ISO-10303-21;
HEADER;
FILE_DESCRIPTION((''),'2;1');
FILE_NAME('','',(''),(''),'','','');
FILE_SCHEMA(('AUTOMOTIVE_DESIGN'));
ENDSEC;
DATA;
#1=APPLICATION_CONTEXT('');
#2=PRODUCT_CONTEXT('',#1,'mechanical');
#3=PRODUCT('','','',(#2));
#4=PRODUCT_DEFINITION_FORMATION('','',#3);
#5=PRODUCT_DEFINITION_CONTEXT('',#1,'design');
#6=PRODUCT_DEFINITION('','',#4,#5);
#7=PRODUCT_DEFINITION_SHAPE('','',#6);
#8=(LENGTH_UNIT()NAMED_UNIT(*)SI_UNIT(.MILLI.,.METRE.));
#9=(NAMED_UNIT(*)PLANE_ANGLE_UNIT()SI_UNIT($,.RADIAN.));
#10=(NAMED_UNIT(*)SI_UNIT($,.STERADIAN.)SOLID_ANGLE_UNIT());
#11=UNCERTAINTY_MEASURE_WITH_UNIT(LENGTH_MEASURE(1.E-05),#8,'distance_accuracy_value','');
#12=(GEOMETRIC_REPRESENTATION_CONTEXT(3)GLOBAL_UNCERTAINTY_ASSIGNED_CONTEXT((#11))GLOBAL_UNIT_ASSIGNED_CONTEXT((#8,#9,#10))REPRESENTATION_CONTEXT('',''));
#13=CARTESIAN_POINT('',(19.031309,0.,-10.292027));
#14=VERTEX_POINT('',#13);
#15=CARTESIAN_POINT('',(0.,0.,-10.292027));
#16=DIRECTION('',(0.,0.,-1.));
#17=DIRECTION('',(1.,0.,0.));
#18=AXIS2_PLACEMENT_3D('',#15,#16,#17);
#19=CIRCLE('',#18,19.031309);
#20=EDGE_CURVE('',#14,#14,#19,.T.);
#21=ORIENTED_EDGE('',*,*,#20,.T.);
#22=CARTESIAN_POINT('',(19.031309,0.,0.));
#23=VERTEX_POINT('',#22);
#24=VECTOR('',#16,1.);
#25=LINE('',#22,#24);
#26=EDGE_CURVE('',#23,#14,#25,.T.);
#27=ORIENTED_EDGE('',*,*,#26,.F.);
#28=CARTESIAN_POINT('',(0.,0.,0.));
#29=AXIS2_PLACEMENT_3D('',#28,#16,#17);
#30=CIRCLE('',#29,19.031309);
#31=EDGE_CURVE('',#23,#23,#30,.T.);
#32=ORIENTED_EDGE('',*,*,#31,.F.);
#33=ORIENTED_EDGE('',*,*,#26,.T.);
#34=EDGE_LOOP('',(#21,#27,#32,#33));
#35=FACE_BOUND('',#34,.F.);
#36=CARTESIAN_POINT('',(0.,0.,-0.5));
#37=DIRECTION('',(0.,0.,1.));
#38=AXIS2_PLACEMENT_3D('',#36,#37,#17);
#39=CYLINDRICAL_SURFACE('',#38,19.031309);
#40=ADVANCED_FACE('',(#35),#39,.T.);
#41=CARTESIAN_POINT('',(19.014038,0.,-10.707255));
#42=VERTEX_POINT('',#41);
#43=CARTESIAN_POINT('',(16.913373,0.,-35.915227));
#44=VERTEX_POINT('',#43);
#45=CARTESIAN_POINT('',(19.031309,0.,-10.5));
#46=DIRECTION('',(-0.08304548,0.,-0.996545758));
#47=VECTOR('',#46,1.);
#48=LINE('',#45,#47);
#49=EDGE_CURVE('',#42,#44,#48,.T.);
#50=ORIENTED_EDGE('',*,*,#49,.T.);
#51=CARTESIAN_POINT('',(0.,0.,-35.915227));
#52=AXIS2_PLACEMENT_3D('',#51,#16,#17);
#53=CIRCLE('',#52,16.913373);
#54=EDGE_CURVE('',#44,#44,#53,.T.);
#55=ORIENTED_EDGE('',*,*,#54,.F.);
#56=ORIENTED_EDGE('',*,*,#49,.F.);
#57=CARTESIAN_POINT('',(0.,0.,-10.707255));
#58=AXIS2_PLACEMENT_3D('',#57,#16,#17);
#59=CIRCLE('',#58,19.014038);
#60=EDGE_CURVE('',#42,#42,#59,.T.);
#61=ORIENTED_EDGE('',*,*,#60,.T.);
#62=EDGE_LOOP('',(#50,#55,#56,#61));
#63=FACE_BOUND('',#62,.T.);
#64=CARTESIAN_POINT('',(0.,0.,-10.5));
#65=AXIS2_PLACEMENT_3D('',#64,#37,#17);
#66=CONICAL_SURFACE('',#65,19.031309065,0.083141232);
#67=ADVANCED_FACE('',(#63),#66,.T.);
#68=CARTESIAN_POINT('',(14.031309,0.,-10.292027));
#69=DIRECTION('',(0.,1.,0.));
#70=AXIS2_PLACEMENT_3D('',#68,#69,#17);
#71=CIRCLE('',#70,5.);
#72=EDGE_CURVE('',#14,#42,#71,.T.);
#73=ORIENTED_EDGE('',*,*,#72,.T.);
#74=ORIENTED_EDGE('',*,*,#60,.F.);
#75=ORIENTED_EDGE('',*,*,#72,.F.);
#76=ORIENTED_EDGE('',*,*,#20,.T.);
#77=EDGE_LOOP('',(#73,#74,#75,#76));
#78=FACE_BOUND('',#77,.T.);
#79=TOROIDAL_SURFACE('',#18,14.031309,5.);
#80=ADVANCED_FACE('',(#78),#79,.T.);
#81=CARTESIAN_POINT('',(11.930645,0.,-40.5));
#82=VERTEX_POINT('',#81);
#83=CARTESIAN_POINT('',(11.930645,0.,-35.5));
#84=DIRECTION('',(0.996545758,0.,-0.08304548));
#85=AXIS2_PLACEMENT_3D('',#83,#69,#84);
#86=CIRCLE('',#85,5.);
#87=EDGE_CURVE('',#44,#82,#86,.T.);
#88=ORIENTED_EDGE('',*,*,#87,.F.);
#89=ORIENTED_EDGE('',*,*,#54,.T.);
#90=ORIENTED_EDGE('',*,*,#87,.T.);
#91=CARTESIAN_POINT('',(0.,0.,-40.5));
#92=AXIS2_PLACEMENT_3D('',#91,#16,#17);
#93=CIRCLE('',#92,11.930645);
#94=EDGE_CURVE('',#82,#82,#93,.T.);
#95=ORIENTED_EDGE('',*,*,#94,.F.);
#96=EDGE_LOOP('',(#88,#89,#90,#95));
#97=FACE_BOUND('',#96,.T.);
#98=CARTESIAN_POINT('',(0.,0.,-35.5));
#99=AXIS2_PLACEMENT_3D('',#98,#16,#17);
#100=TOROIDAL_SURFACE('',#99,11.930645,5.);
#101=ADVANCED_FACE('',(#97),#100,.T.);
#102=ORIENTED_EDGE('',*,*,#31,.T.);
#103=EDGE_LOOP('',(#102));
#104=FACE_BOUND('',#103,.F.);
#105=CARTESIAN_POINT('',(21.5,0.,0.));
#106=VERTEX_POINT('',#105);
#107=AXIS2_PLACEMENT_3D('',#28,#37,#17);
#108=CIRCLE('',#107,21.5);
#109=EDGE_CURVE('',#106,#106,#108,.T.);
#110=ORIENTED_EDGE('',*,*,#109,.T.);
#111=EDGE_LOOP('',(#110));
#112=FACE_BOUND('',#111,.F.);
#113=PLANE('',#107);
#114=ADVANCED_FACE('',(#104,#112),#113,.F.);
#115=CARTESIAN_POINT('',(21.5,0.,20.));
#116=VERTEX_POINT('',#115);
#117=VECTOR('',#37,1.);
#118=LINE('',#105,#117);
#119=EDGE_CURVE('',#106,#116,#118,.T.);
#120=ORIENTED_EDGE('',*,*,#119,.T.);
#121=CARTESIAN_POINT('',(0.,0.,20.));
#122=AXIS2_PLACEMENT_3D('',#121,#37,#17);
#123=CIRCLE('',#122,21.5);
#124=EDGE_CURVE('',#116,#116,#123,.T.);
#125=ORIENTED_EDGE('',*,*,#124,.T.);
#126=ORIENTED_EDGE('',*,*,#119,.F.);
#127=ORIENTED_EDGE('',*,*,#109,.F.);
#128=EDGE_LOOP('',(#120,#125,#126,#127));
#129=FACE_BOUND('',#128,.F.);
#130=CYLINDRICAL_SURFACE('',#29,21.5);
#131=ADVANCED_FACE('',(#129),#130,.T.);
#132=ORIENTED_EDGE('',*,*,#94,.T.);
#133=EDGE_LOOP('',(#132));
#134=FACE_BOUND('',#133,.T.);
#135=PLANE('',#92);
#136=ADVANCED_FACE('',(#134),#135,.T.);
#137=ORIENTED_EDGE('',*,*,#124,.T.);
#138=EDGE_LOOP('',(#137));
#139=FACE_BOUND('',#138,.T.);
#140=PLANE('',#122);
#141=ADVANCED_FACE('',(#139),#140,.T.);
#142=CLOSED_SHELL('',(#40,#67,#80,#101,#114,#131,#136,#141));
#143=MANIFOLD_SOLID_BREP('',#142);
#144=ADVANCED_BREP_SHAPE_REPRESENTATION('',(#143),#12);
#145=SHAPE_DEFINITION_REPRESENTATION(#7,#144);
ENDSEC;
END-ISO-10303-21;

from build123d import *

# Parameters (mm, degrees)
F0_R     = 21.5
F1_DEPTH = 20
F2_R     = 19.0313090647
F3_DEPTH = 0.5
F4_R     = 19.0313090647
F5_DEPTH = 40


# Not quite as in the source:
# - a fillet or chamfer that OpenCascade refuses, or shapes differently, is made with other operations: its cross-section is extruded or revolved along the edge and cut away or added


with BuildPart() as f1:
    # F0 (on Top) → F1 (new body)
    with BuildSketch(Plane.XY):
        Circle(F0_R)
    extrude(amount=F1_DEPTH)

    # F2 (on face) → F3 (join)
    with BuildSketch(Plane(origin=(0, 0, 0), x_dir=(1, 0, 0), z_dir=(0, 0, -1))):
        Circle(F2_R)
    extrude(amount=F3_DEPTH)

    # F4 (on face) → F5 (join)
    with BuildSketch(Plane(origin=(0, 0, -0.5), x_dir=(1, 0, 0), z_dir=(0, 0, -1))):
        Circle(F4_R)
    extrude(amount=F5_DEPTH)

    # F6: chamfer of 2.5 x 30 on 1 edges, made by hand

    # F6_s1 → F6_t2 (revolve, cut)
    with BuildSketch(Plane.XZ):
        Polygon((19.0313090647, -10.5), (16.5313090647, -40.5), (19.0313090647, -40.5), align=None)
    revolve(axis=Axis((0, 0, -40.5), (0, 0, -1)), mode=Mode.SUBTRACT)

    # F7: fillet of radius 5 on 2 edges, made by hand

    # F7_s1 → F7_t2 (revolve, cut)
    with BuildSketch(Plane.XZ):
        with BuildLine():
            ThreePointArc((16.9133734481, -35.9152273993), (15.3161921018, -39.1794114337), (11.9306446569, -40.5))
            Line((11.9306446569, -40.5), (16.5313090647, -40.5))
            Line((16.5313090647, -40.5), (16.9133734481, -35.9152273993))
        make_face()
    revolve(axis=Axis((0, 0, -40.5), (0, 0, -1)), mode=Mode.SUBTRACT)

    # F7_s3 → F7_t4 (revolve, cut)
    with BuildSketch(Plane.XZ):
        with BuildLine():
            ThreePointArc((19.0313090647, -10.2920271064), (19.0269893965, -10.4998203255), (19.0140378559, -10.7072545056))
            Line((19.0140378559, -10.7072545056), (19.0313090647, -10.5))
            Line((19.0313090647, -10.5), (19.0313090647, -10.2920271064))
        make_face()
    revolve(axis=Axis((0, 0, -10.5), (0, 0, -1)), mode=Mode.SUBTRACT)


solid = f1.part
